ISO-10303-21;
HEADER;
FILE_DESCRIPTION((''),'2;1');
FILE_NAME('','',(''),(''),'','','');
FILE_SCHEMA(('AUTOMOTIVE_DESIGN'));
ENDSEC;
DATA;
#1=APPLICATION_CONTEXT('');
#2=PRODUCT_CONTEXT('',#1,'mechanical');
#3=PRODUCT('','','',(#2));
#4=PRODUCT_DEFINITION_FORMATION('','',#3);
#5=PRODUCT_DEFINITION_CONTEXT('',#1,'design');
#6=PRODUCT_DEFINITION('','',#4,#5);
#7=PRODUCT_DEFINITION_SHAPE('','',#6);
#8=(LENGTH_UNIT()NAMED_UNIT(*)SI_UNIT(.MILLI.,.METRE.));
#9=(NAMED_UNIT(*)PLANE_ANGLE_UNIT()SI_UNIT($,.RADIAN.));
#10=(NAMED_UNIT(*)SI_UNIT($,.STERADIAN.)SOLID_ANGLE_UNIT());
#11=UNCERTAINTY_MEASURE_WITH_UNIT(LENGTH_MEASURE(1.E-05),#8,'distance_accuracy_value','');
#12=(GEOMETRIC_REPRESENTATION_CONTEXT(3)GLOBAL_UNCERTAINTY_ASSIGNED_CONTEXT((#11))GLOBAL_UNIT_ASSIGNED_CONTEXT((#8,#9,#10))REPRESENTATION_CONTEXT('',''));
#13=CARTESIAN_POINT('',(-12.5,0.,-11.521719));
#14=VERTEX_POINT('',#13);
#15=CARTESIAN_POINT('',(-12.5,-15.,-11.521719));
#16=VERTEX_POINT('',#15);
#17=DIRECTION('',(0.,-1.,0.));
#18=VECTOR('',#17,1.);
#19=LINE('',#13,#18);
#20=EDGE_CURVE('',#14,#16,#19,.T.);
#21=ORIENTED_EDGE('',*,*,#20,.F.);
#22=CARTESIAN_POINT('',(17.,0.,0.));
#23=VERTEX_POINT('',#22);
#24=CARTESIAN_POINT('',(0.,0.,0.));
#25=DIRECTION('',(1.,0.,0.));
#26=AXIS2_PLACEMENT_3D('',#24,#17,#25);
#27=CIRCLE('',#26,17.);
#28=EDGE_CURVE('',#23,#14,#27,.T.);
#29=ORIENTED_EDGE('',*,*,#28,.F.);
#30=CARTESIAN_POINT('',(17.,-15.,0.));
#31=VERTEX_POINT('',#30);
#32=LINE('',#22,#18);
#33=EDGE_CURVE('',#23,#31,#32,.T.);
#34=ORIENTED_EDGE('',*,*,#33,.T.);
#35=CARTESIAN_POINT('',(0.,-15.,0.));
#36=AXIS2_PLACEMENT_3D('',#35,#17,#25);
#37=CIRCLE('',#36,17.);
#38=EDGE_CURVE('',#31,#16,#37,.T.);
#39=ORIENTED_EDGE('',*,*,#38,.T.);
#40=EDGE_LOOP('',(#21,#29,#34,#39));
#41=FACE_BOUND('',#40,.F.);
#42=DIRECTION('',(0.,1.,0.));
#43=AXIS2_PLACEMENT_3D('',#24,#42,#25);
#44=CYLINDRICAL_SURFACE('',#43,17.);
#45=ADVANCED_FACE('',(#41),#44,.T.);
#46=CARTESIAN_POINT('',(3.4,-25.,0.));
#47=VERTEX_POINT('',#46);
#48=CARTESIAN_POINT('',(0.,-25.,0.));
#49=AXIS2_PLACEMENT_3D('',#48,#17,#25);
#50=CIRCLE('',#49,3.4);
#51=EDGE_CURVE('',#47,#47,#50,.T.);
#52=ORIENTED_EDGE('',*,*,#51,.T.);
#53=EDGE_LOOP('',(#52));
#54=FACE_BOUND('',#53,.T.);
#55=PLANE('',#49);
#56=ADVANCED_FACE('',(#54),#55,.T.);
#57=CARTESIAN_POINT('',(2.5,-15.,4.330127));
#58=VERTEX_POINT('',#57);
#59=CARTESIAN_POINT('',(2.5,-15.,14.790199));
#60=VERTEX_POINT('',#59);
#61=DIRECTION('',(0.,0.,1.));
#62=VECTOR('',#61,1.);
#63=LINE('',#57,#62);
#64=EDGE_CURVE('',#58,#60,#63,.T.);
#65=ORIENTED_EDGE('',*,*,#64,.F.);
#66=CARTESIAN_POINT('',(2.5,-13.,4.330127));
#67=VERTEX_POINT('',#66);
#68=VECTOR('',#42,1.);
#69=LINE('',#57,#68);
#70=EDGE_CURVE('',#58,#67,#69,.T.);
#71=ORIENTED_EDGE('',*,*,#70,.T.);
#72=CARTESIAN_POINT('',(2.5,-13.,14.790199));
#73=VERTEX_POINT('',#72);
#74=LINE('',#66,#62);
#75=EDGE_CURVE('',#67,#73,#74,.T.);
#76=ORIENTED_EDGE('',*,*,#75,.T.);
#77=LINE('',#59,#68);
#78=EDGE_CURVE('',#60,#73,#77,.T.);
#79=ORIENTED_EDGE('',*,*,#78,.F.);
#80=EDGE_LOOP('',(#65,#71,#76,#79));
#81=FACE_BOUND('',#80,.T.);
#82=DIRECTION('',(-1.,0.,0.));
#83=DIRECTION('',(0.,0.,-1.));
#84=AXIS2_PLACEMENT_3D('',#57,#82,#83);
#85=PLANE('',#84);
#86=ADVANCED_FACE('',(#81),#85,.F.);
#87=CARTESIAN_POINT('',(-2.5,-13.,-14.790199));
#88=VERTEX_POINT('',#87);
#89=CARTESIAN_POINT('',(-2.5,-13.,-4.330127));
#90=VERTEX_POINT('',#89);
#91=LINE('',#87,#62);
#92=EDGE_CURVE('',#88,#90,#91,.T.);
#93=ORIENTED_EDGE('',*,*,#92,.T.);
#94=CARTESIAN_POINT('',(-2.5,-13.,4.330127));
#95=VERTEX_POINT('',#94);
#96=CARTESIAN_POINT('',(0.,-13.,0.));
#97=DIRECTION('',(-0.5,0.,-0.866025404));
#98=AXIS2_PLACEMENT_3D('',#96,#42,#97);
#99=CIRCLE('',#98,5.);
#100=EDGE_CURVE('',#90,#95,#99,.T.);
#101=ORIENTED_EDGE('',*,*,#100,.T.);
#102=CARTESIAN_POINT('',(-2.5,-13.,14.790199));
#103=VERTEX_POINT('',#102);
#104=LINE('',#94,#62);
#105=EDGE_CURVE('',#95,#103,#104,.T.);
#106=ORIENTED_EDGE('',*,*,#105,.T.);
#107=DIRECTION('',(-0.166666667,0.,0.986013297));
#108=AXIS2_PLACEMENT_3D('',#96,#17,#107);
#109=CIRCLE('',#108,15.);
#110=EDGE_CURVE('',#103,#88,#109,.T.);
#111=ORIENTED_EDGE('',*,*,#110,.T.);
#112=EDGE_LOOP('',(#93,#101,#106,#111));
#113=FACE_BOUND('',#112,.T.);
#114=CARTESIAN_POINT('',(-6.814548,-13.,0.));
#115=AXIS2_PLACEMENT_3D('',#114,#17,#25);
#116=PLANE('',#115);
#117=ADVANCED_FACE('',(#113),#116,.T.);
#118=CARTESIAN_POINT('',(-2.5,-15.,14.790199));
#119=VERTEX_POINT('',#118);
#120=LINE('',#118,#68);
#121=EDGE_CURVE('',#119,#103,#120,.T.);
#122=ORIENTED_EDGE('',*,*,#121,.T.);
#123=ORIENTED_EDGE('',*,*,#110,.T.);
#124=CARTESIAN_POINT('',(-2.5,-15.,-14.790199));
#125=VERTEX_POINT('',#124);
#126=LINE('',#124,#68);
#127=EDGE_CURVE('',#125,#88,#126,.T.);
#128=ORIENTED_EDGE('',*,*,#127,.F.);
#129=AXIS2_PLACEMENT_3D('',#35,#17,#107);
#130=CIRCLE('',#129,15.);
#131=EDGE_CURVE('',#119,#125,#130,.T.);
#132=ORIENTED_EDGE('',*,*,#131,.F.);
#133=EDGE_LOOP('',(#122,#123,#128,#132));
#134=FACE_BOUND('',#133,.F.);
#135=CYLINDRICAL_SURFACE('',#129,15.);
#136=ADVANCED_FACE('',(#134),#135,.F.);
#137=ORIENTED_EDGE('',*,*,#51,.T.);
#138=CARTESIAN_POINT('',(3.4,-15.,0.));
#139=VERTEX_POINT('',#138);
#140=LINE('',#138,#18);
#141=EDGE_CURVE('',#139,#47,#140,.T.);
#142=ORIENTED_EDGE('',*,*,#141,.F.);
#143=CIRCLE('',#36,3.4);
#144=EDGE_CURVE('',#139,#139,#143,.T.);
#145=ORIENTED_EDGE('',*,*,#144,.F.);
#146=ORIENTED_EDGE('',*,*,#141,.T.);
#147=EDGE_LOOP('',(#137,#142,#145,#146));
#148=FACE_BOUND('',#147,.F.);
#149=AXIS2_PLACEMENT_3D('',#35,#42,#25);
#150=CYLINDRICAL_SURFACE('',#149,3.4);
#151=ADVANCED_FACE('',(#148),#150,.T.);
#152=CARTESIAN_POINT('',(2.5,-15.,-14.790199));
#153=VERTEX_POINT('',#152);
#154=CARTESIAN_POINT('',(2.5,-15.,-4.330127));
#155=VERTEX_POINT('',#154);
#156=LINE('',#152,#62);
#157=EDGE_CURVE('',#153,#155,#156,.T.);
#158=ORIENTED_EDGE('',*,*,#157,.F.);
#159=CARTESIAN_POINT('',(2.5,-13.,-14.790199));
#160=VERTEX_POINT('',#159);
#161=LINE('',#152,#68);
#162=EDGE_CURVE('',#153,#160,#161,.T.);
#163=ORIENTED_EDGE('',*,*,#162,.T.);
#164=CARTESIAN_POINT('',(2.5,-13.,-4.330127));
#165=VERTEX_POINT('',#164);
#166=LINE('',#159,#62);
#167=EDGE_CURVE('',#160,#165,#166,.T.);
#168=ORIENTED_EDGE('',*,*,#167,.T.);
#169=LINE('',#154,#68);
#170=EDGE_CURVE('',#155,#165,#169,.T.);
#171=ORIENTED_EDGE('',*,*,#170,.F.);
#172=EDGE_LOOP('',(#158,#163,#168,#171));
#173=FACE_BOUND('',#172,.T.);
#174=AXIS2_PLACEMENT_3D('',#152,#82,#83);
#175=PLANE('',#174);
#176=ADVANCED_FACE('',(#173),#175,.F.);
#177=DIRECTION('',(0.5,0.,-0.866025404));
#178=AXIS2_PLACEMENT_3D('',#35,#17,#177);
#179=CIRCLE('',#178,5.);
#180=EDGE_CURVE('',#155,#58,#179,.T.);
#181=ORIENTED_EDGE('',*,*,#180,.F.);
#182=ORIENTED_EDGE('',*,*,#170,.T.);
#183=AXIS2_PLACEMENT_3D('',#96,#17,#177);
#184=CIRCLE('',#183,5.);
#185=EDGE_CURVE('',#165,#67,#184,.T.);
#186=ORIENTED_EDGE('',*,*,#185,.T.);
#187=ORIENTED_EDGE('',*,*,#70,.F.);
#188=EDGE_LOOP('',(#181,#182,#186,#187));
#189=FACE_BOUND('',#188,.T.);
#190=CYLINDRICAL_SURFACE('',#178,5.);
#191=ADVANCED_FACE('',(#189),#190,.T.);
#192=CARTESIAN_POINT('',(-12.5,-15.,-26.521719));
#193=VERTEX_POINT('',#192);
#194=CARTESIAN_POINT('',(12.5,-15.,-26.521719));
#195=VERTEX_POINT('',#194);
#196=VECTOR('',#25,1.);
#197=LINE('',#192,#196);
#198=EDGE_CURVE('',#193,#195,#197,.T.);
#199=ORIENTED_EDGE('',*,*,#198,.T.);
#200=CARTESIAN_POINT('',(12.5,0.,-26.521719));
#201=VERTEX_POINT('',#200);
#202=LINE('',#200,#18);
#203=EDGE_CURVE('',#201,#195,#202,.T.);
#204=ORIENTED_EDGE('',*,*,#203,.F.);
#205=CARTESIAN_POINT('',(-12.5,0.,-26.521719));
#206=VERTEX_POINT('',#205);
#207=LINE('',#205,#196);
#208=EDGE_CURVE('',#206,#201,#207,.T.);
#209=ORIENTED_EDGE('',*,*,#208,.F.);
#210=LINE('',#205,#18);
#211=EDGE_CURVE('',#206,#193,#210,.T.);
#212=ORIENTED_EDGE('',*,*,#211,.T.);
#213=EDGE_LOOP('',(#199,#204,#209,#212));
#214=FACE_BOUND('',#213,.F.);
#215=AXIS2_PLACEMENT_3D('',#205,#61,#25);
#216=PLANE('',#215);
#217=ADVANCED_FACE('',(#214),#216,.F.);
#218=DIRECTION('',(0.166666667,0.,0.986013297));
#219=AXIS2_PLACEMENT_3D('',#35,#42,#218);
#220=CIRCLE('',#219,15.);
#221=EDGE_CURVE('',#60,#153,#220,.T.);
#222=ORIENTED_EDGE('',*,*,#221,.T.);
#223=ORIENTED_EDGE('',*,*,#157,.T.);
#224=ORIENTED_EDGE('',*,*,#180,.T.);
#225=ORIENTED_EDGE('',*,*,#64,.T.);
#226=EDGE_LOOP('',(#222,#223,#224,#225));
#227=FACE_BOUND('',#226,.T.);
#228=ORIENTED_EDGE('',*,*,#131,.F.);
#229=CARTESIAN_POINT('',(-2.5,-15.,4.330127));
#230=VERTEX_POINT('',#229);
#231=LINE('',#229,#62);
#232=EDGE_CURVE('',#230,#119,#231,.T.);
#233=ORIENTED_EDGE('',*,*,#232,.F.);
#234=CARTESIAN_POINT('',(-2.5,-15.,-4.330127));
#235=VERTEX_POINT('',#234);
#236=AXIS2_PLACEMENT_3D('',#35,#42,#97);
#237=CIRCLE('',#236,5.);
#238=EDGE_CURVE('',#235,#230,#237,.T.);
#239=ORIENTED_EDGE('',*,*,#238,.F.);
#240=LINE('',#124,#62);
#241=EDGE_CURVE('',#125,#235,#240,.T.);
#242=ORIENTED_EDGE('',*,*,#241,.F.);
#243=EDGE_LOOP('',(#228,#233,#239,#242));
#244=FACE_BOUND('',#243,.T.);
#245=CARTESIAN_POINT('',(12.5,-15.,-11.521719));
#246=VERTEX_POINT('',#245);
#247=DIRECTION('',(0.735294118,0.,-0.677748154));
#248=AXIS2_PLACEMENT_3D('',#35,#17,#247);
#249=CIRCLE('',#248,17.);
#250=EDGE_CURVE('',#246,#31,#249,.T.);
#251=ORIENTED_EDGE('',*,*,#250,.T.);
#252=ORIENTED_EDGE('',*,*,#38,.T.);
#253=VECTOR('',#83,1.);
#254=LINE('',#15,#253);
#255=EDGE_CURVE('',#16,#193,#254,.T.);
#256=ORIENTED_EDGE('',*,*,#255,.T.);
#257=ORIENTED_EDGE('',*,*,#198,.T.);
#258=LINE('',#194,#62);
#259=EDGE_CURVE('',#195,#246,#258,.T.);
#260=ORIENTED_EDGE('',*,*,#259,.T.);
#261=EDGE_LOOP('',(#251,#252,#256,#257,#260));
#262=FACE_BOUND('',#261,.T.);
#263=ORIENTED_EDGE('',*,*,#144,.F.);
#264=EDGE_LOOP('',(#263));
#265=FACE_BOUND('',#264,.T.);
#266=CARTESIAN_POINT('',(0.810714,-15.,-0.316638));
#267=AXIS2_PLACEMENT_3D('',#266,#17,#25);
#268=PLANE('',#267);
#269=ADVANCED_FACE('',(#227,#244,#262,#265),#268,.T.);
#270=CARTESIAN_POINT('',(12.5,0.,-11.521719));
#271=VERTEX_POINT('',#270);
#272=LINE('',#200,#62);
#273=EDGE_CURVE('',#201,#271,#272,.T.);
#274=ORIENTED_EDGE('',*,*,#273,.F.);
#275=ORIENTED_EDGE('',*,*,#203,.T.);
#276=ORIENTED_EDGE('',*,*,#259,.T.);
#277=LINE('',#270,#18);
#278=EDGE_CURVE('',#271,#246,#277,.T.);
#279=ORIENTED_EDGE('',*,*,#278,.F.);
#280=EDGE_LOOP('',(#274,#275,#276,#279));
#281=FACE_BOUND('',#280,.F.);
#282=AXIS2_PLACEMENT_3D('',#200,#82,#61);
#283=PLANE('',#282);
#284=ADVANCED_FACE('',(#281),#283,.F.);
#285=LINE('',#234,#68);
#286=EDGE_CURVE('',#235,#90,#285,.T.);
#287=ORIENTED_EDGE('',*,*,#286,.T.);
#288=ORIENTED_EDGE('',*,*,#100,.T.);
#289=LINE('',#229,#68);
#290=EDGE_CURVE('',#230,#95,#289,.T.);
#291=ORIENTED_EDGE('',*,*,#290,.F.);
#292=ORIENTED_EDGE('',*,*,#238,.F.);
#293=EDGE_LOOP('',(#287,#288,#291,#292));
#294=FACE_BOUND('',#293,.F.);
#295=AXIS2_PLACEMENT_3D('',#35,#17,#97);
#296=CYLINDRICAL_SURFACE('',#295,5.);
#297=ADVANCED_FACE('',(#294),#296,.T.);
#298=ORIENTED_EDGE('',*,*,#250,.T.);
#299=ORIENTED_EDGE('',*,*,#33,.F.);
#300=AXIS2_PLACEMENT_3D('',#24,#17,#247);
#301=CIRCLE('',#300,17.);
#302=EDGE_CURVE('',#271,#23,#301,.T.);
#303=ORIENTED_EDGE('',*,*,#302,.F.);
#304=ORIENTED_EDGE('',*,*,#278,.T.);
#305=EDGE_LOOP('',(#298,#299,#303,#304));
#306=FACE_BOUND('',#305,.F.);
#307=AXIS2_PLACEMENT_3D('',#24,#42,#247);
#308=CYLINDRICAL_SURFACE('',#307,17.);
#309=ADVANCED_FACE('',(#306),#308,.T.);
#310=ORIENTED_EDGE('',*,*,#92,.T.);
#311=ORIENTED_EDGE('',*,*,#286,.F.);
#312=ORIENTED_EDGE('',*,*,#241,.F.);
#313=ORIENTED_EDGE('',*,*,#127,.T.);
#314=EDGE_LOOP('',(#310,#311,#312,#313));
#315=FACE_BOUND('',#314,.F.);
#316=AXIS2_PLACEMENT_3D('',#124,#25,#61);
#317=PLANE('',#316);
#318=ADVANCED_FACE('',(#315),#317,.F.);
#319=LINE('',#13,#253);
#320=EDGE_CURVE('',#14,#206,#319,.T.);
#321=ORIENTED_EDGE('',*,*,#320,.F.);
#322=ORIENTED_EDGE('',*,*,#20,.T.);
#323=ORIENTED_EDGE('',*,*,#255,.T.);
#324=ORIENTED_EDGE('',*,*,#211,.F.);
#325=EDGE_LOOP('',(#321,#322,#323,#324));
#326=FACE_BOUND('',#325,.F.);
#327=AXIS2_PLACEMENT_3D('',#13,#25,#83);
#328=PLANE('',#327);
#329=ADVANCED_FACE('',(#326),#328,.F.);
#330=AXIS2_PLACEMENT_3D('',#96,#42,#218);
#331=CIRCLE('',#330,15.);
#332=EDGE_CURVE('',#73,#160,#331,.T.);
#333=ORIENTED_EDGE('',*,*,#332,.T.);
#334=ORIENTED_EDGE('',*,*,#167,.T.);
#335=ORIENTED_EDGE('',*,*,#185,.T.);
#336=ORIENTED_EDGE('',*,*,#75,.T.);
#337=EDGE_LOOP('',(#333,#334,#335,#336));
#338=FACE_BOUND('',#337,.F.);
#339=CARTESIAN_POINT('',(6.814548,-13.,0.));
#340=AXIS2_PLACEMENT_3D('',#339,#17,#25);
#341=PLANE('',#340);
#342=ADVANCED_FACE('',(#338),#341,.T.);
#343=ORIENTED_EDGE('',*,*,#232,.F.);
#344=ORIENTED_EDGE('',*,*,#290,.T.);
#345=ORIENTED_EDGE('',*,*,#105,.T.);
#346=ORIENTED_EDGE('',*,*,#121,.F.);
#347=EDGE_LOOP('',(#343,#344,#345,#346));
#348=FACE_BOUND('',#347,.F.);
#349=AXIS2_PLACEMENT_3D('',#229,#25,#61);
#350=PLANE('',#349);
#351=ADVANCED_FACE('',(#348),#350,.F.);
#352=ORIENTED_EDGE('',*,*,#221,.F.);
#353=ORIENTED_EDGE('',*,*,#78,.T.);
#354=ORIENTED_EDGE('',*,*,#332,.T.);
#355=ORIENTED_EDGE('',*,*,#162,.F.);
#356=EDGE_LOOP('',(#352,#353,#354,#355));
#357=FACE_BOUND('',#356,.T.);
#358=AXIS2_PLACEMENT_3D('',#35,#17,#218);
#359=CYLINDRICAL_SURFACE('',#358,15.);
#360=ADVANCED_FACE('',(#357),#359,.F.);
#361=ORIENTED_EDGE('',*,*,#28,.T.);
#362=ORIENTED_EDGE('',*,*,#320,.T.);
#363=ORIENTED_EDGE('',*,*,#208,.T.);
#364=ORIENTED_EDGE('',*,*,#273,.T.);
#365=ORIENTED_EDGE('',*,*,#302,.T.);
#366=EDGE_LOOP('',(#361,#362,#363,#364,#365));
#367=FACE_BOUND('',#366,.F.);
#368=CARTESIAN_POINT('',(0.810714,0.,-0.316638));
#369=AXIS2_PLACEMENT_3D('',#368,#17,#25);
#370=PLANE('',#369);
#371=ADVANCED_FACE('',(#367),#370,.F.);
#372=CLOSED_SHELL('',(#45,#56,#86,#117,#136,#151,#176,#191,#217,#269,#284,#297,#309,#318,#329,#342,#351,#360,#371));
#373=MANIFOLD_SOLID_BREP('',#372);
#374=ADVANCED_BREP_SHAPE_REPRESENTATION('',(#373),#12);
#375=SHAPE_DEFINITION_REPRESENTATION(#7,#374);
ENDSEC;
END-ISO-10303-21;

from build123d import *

# Parameters (mm, degrees)
F1_DEPTH = 15
F3_DEPTH = 2
F4_R     = 3.4
F5_DEPTH = 10


# Not quite as in the source:
# - a feature of the source that left no trace in its solid (it failed there, or was rolled back) is left out
# - a pattern or mirror of a feature is missing from the dataset's text; its kind, count and spacing are read off the source's solid


with BuildPart() as f1:
    # F0 (on Front) → F1 (new body)
    with BuildSketch(Plane.XZ):
        with BuildLine():
            ThreePointArc((12.5, -11.5217186218), (15.8350876221, -6.1846584384), (17, 0))
            ThreePointArc((17, 0), (-6.1846584384, 15.8350876221), (-12.5, -11.5217186218))
            ThreePointArc((-12.5, -11.5217186218), (0, -17), (12.5, -11.5217186218))
        make_face()
        with BuildLine():
            ThreePointArc((12.5, -11.5217186218), (0, -17), (-12.5, -11.5217186218))
            Line((-12.5, -11.5217186218), (-12.5, -26.5217186218))
            Line((-12.5, -26.5217186218), (12.5, -26.5217186218))
            Line((12.5, -26.5217186218), (12.5, -11.5217186218))
        make_face()
    extrude(amount=F1_DEPTH)

    # F2 (on face) → F3 (cut)
    with BuildSketch(Plane.XZ.offset(15)):
        with BuildLine():
            Line((-2.5, 4.3301270189), (-2.5, 14.7901994577))
            ThreePointArc((-2.5, 14.7901994577), (-15, 0), (-2.5, -14.7901994577))
            Line((-2.5, -14.7901994577), (-2.5, -4.3301270189))
            ThreePointArc((-2.5, -4.3301270189), (-5, 0), (-2.5, 4.3301270189))
        make_face()
    f3 = extrude(amount=-F3_DEPTH, mode=Mode.SUBTRACT)

    # F3_copies: F3 across plane
    add(f3.mirror(Plane(origin=(0, 0, 0), x_dir=(0, 0, 1), z_dir=(1, 0, 0))), mode=Mode.SUBTRACT)

    # F4 (on face) → F5 (join)
    with BuildSketch(Plane.XZ.offset(15)):
        Circle(F4_R)
    extrude(amount=F5_DEPTH)


solid = f1.part
